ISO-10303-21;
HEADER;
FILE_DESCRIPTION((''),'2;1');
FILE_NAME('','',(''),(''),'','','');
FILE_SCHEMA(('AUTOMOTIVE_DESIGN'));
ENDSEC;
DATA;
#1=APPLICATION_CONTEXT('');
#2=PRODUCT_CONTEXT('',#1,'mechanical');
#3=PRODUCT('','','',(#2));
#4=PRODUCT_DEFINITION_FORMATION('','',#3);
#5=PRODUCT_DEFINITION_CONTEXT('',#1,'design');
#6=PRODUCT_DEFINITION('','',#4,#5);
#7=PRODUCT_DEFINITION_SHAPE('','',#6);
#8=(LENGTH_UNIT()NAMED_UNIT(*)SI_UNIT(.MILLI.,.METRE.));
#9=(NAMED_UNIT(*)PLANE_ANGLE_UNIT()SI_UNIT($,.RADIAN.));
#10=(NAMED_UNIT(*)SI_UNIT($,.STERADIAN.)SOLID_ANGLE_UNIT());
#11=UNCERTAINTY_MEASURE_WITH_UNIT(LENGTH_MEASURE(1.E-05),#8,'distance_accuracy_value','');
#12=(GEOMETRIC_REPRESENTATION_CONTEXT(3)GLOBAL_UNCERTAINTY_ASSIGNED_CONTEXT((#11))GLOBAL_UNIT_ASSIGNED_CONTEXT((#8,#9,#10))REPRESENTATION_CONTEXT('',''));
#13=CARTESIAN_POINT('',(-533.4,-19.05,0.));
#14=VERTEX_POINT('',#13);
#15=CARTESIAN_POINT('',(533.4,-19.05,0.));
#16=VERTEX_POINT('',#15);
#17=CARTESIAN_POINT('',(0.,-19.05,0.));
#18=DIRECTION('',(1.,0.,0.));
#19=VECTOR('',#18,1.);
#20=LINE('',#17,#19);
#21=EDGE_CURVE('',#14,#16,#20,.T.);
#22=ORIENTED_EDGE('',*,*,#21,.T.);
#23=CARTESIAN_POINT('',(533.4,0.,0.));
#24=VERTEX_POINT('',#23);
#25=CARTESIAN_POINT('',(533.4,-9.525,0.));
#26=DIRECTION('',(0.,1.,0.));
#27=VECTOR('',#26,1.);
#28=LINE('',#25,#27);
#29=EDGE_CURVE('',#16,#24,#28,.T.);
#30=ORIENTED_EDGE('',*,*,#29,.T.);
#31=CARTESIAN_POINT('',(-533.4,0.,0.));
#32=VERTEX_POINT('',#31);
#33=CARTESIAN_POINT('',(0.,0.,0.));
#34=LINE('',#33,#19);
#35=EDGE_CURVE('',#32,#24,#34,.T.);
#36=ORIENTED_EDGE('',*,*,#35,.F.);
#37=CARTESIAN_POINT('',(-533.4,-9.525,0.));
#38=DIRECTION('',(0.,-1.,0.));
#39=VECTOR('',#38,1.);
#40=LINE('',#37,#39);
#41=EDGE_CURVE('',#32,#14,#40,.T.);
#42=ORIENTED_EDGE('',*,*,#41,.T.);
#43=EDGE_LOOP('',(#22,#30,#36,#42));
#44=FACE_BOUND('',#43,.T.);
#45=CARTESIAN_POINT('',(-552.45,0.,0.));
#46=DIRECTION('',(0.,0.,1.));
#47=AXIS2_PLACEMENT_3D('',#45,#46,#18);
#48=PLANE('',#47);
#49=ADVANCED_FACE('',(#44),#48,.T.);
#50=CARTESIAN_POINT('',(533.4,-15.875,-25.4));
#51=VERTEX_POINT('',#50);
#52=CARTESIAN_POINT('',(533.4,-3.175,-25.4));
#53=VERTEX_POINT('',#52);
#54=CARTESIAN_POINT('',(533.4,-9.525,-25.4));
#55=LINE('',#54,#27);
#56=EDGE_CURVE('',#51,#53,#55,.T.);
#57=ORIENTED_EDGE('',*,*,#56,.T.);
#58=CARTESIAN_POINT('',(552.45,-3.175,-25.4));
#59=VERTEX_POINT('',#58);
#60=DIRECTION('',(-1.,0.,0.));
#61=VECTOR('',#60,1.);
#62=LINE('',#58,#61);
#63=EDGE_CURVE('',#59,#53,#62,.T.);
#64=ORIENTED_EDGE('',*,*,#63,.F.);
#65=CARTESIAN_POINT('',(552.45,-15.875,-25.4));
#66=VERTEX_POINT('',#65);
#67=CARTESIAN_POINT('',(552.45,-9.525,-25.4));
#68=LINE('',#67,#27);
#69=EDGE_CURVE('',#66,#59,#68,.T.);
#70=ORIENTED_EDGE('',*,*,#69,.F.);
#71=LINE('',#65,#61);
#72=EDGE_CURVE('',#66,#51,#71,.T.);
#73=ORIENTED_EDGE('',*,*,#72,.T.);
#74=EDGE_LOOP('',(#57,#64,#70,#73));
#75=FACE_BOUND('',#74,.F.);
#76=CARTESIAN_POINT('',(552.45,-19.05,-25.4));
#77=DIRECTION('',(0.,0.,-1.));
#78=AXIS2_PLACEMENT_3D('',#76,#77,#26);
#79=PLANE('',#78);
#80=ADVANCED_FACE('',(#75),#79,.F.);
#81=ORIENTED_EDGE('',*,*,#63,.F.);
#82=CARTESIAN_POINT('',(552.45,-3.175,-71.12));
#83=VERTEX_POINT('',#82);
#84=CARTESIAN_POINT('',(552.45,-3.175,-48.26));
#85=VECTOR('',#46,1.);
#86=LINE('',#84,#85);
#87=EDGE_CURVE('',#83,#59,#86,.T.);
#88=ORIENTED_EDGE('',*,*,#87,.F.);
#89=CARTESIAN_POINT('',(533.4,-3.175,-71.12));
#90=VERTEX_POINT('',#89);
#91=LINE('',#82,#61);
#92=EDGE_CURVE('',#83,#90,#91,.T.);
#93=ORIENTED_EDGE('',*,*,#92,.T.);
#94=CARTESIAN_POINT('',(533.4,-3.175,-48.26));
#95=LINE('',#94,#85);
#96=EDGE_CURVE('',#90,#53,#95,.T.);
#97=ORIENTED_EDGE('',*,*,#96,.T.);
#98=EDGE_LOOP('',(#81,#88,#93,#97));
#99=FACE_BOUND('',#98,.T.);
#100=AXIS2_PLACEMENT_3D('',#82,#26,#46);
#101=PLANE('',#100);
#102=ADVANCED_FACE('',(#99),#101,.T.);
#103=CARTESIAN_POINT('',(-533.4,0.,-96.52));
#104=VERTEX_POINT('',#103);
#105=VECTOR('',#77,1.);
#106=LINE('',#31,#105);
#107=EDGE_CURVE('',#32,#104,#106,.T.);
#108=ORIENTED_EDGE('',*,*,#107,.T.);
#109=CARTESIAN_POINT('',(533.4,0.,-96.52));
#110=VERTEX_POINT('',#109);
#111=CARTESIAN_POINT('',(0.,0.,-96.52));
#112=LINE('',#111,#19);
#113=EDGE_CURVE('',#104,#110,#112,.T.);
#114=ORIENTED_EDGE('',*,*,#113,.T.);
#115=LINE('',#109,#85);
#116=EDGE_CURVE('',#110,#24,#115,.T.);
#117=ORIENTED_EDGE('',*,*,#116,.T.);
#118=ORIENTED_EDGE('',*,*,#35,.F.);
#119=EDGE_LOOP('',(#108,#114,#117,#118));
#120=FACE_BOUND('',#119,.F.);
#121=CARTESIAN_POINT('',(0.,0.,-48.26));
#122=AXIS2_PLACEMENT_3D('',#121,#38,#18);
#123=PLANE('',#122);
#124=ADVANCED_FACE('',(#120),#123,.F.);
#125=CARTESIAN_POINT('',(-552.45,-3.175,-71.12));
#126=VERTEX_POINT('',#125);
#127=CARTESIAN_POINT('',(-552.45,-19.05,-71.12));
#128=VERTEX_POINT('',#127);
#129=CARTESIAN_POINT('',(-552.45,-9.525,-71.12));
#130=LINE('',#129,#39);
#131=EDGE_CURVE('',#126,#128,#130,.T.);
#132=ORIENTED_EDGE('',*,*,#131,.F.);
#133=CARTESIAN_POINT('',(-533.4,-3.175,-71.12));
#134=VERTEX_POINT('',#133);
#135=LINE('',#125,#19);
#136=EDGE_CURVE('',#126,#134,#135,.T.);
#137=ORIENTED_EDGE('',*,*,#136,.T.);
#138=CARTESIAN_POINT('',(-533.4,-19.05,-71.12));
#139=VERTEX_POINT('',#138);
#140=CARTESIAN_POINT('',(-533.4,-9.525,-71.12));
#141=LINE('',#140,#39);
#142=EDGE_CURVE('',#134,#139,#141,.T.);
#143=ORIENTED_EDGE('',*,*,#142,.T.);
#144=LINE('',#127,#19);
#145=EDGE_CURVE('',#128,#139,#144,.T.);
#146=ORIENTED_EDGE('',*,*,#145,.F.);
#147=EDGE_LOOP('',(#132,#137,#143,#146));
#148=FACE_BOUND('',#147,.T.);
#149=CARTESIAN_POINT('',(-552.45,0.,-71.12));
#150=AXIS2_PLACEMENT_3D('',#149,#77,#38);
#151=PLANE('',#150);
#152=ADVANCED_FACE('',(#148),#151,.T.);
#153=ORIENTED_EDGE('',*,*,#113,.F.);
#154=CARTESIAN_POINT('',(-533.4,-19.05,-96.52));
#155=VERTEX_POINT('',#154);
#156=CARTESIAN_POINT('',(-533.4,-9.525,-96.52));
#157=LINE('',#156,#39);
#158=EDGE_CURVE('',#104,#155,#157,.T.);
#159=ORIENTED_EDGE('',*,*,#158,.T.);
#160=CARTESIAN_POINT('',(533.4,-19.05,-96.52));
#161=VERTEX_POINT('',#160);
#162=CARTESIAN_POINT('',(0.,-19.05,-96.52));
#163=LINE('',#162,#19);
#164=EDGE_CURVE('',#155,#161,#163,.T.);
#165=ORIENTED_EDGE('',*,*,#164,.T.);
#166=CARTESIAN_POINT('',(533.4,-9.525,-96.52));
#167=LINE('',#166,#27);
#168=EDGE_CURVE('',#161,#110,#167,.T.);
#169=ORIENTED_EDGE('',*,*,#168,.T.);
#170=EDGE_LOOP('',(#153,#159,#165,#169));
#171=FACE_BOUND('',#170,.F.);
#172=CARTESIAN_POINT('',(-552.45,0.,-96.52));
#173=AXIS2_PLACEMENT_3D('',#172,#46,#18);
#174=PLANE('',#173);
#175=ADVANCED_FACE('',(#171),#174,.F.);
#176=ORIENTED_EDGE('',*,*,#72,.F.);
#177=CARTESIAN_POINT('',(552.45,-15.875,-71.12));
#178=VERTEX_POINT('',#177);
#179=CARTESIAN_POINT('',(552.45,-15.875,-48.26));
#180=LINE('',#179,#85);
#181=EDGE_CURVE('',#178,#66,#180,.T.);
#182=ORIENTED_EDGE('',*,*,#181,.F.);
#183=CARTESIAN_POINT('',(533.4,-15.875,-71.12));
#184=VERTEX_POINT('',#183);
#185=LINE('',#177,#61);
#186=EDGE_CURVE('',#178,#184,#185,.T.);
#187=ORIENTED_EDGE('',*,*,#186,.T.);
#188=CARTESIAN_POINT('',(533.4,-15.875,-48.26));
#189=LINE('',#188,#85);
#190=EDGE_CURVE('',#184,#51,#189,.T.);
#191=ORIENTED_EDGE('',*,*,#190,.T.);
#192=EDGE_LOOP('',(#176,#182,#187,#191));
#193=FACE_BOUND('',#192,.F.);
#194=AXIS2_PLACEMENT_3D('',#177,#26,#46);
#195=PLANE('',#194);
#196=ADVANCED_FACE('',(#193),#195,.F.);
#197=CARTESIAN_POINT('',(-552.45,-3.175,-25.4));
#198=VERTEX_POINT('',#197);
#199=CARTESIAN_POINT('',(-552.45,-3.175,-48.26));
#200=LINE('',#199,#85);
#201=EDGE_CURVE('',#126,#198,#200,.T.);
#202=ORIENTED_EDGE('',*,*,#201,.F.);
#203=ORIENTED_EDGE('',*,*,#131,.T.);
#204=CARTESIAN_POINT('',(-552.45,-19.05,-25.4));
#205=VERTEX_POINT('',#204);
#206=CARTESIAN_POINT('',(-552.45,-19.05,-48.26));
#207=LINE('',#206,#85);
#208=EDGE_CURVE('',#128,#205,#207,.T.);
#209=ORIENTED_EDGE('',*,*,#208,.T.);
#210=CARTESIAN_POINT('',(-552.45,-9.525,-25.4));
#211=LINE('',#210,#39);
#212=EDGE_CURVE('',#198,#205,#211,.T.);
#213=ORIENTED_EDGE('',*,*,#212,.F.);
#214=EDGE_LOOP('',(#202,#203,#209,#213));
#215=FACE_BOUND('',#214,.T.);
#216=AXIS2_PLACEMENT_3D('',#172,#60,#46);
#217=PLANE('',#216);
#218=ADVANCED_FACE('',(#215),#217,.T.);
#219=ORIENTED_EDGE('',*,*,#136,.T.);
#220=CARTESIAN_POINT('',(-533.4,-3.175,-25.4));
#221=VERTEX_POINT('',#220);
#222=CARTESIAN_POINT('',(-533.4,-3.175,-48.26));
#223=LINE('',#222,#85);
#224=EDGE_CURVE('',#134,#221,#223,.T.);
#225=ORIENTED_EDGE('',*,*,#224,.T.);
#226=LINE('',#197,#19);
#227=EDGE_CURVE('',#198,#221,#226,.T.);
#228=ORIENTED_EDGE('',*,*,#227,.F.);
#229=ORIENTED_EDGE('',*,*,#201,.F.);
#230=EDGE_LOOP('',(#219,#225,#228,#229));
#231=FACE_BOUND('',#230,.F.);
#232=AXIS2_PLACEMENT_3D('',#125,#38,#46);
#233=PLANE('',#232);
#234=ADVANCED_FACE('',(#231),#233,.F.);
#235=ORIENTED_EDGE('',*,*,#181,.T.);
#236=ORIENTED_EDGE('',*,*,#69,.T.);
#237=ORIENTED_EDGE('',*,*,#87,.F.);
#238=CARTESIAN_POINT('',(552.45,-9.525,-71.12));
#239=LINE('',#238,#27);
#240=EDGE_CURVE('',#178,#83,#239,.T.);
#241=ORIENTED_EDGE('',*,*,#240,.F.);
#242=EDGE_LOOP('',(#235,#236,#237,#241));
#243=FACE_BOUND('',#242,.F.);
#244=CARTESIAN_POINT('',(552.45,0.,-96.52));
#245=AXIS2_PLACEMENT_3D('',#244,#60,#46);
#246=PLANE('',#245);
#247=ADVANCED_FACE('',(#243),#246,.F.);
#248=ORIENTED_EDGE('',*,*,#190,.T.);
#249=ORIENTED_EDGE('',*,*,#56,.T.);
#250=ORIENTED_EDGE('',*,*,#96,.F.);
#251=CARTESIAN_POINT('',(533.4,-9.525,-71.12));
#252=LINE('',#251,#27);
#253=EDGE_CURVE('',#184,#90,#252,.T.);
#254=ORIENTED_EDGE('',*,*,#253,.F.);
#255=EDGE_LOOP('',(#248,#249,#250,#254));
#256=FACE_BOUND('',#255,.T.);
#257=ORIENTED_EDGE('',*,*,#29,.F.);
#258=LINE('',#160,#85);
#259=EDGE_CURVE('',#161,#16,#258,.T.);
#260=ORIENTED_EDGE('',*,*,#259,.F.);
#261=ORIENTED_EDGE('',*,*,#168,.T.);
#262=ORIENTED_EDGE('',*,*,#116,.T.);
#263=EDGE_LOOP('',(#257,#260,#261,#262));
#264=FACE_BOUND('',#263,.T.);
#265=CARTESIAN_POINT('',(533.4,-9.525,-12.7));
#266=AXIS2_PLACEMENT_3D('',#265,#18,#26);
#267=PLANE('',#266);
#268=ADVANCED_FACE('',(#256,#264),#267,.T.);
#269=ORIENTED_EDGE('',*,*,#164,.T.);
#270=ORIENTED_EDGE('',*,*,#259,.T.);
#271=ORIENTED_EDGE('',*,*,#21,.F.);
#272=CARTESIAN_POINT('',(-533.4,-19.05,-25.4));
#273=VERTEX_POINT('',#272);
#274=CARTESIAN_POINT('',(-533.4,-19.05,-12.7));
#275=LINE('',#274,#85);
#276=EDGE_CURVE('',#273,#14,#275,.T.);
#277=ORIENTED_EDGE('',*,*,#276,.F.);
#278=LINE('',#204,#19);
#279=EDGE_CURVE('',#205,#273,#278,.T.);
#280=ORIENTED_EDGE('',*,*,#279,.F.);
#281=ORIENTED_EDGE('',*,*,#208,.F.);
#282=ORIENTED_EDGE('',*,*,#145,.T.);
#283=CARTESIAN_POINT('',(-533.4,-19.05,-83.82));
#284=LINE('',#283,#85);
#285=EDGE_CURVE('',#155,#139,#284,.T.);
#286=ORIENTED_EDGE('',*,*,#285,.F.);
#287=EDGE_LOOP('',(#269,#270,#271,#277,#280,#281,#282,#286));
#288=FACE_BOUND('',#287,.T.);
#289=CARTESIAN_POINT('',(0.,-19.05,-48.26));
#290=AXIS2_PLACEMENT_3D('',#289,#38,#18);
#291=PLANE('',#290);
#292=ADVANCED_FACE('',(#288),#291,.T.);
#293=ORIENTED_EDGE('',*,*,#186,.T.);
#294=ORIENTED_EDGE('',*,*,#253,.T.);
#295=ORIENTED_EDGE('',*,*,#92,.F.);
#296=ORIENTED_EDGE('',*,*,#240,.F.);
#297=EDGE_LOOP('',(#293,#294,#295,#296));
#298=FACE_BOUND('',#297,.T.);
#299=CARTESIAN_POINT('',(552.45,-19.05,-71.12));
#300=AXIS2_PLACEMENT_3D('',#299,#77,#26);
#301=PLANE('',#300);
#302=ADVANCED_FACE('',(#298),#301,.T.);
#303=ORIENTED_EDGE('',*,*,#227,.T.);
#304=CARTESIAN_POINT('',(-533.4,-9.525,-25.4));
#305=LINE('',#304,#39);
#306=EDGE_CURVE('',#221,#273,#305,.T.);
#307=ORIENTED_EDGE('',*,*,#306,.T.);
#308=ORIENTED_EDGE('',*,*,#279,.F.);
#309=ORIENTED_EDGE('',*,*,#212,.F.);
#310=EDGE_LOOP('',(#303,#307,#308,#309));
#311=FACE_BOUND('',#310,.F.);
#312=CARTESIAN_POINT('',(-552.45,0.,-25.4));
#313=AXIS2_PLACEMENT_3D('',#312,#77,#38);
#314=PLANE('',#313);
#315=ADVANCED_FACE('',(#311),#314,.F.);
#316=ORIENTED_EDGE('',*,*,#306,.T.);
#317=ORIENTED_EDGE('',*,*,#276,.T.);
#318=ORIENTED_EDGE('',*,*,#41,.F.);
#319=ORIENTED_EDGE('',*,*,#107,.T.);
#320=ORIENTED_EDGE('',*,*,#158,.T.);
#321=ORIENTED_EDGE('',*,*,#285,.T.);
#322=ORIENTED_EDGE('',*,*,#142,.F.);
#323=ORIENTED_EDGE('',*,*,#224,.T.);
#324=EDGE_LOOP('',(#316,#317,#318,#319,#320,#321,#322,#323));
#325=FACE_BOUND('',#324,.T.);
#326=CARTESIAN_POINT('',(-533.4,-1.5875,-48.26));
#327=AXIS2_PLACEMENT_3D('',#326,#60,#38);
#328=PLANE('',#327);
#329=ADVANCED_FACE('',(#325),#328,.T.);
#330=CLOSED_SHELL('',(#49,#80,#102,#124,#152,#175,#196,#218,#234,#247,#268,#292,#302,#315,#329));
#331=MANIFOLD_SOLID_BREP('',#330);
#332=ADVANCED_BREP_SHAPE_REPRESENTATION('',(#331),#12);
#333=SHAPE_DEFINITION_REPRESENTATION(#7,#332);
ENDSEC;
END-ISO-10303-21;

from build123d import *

# Parameters (mm, degrees)
F0_W      = 1104.9
F0_H      = 96.52
F1_DEPTH  = 19.05
F2_W      = 19.05
F2_H      = 25.4
F3_DEPTH  = 19.05
F4_W      = 19.05
F4_H      = 25.4
F5_DEPTH  = 19.05
F6_W      = 3.175
F6_H      = 45.72
F7_DEPTH  = 19.05
F8_W      = 19.05
F8_H      = 25.4
F9_DEPTH  = 19.05
F10_W     = 19.05
F10_H     = 25.4
F11_DEPTH = 19.05
F12_W     = 3.175
F12_H     = 45.72
F13_DEPTH = 19.05
F14_W     = 3.175
F14_H     = 45.72
F15_DEPTH = 19.05


# Not quite as in the source:
# - a length typed as a fraction of an inch, garbled in the dataset ("3 / 203.2 mm" for 3/8 in), is restored


with BuildPart() as f1:
    # F0 (on Front) → F1 (new body)
    with BuildSketch(Plane.XZ):
        with Locations((0, -48.26)):
            Rectangle(F0_W, F0_H)
    extrude(amount=F1_DEPTH)

    # F2 (on face) → F3 (cut)
    with BuildSketch(Plane(origin=(-552.45, 0, 0), x_dir=(0, -1, 0), z_dir=(-1, 0, 0))):
        with Locations((9.525, -12.7)):
            Rectangle(F2_W, F2_H)
    extrude(amount=-F3_DEPTH, mode=Mode.SUBTRACT)

    # F4 (on face) → F5 (cut)
    with BuildSketch(Plane(origin=(-552.45, 0, 0), x_dir=(0, -1, 0), z_dir=(-1, 0, 0))):
        with Locations((9.525, -83.82)):
            Rectangle(F4_W, F4_H)
    extrude(amount=-F5_DEPTH, mode=Mode.SUBTRACT)

    # F6 (on face) → F7 (cut)
    with BuildSketch(Plane(origin=(-552.45, 0, 0), x_dir=(0, -1, 0), z_dir=(-1, 0, 0))):
        with Locations((1.5875, -48.26)):
            Rectangle(F6_W, F6_H)
    extrude(amount=-F7_DEPTH, mode=Mode.SUBTRACT)

    # F8 (on face) → F9 (cut)
    with BuildSketch(Plane.YZ.offset(552.45)):
        with Locations((-9.525, -12.7)):
            Rectangle(F8_W, F8_H)
    extrude(amount=-F9_DEPTH, mode=Mode.SUBTRACT)

    # F10 (on face) → F11 (cut)
    with BuildSketch(Plane.YZ.offset(552.45)):
        with Locations((-9.525, -83.82)):
            Rectangle(F10_W, F10_H)
    extrude(amount=-F11_DEPTH, mode=Mode.SUBTRACT)

    # F12 (on face) → F13 (cut)
    with BuildSketch(Plane.YZ.offset(552.45)):
        with Locations((-17.4625, -48.26)):
            Rectangle(F12_W, F12_H)
    extrude(amount=-F13_DEPTH, mode=Mode.SUBTRACT)

    # F14 (on face) → F15 (cut)
    with BuildSketch(Plane.YZ.offset(552.45)):
        with Locations((-1.5875, -48.26)):
            Rectangle(F14_W, F14_H)
    extrude(amount=-F15_DEPTH, mode=Mode.SUBTRACT)


solid = f1.part
